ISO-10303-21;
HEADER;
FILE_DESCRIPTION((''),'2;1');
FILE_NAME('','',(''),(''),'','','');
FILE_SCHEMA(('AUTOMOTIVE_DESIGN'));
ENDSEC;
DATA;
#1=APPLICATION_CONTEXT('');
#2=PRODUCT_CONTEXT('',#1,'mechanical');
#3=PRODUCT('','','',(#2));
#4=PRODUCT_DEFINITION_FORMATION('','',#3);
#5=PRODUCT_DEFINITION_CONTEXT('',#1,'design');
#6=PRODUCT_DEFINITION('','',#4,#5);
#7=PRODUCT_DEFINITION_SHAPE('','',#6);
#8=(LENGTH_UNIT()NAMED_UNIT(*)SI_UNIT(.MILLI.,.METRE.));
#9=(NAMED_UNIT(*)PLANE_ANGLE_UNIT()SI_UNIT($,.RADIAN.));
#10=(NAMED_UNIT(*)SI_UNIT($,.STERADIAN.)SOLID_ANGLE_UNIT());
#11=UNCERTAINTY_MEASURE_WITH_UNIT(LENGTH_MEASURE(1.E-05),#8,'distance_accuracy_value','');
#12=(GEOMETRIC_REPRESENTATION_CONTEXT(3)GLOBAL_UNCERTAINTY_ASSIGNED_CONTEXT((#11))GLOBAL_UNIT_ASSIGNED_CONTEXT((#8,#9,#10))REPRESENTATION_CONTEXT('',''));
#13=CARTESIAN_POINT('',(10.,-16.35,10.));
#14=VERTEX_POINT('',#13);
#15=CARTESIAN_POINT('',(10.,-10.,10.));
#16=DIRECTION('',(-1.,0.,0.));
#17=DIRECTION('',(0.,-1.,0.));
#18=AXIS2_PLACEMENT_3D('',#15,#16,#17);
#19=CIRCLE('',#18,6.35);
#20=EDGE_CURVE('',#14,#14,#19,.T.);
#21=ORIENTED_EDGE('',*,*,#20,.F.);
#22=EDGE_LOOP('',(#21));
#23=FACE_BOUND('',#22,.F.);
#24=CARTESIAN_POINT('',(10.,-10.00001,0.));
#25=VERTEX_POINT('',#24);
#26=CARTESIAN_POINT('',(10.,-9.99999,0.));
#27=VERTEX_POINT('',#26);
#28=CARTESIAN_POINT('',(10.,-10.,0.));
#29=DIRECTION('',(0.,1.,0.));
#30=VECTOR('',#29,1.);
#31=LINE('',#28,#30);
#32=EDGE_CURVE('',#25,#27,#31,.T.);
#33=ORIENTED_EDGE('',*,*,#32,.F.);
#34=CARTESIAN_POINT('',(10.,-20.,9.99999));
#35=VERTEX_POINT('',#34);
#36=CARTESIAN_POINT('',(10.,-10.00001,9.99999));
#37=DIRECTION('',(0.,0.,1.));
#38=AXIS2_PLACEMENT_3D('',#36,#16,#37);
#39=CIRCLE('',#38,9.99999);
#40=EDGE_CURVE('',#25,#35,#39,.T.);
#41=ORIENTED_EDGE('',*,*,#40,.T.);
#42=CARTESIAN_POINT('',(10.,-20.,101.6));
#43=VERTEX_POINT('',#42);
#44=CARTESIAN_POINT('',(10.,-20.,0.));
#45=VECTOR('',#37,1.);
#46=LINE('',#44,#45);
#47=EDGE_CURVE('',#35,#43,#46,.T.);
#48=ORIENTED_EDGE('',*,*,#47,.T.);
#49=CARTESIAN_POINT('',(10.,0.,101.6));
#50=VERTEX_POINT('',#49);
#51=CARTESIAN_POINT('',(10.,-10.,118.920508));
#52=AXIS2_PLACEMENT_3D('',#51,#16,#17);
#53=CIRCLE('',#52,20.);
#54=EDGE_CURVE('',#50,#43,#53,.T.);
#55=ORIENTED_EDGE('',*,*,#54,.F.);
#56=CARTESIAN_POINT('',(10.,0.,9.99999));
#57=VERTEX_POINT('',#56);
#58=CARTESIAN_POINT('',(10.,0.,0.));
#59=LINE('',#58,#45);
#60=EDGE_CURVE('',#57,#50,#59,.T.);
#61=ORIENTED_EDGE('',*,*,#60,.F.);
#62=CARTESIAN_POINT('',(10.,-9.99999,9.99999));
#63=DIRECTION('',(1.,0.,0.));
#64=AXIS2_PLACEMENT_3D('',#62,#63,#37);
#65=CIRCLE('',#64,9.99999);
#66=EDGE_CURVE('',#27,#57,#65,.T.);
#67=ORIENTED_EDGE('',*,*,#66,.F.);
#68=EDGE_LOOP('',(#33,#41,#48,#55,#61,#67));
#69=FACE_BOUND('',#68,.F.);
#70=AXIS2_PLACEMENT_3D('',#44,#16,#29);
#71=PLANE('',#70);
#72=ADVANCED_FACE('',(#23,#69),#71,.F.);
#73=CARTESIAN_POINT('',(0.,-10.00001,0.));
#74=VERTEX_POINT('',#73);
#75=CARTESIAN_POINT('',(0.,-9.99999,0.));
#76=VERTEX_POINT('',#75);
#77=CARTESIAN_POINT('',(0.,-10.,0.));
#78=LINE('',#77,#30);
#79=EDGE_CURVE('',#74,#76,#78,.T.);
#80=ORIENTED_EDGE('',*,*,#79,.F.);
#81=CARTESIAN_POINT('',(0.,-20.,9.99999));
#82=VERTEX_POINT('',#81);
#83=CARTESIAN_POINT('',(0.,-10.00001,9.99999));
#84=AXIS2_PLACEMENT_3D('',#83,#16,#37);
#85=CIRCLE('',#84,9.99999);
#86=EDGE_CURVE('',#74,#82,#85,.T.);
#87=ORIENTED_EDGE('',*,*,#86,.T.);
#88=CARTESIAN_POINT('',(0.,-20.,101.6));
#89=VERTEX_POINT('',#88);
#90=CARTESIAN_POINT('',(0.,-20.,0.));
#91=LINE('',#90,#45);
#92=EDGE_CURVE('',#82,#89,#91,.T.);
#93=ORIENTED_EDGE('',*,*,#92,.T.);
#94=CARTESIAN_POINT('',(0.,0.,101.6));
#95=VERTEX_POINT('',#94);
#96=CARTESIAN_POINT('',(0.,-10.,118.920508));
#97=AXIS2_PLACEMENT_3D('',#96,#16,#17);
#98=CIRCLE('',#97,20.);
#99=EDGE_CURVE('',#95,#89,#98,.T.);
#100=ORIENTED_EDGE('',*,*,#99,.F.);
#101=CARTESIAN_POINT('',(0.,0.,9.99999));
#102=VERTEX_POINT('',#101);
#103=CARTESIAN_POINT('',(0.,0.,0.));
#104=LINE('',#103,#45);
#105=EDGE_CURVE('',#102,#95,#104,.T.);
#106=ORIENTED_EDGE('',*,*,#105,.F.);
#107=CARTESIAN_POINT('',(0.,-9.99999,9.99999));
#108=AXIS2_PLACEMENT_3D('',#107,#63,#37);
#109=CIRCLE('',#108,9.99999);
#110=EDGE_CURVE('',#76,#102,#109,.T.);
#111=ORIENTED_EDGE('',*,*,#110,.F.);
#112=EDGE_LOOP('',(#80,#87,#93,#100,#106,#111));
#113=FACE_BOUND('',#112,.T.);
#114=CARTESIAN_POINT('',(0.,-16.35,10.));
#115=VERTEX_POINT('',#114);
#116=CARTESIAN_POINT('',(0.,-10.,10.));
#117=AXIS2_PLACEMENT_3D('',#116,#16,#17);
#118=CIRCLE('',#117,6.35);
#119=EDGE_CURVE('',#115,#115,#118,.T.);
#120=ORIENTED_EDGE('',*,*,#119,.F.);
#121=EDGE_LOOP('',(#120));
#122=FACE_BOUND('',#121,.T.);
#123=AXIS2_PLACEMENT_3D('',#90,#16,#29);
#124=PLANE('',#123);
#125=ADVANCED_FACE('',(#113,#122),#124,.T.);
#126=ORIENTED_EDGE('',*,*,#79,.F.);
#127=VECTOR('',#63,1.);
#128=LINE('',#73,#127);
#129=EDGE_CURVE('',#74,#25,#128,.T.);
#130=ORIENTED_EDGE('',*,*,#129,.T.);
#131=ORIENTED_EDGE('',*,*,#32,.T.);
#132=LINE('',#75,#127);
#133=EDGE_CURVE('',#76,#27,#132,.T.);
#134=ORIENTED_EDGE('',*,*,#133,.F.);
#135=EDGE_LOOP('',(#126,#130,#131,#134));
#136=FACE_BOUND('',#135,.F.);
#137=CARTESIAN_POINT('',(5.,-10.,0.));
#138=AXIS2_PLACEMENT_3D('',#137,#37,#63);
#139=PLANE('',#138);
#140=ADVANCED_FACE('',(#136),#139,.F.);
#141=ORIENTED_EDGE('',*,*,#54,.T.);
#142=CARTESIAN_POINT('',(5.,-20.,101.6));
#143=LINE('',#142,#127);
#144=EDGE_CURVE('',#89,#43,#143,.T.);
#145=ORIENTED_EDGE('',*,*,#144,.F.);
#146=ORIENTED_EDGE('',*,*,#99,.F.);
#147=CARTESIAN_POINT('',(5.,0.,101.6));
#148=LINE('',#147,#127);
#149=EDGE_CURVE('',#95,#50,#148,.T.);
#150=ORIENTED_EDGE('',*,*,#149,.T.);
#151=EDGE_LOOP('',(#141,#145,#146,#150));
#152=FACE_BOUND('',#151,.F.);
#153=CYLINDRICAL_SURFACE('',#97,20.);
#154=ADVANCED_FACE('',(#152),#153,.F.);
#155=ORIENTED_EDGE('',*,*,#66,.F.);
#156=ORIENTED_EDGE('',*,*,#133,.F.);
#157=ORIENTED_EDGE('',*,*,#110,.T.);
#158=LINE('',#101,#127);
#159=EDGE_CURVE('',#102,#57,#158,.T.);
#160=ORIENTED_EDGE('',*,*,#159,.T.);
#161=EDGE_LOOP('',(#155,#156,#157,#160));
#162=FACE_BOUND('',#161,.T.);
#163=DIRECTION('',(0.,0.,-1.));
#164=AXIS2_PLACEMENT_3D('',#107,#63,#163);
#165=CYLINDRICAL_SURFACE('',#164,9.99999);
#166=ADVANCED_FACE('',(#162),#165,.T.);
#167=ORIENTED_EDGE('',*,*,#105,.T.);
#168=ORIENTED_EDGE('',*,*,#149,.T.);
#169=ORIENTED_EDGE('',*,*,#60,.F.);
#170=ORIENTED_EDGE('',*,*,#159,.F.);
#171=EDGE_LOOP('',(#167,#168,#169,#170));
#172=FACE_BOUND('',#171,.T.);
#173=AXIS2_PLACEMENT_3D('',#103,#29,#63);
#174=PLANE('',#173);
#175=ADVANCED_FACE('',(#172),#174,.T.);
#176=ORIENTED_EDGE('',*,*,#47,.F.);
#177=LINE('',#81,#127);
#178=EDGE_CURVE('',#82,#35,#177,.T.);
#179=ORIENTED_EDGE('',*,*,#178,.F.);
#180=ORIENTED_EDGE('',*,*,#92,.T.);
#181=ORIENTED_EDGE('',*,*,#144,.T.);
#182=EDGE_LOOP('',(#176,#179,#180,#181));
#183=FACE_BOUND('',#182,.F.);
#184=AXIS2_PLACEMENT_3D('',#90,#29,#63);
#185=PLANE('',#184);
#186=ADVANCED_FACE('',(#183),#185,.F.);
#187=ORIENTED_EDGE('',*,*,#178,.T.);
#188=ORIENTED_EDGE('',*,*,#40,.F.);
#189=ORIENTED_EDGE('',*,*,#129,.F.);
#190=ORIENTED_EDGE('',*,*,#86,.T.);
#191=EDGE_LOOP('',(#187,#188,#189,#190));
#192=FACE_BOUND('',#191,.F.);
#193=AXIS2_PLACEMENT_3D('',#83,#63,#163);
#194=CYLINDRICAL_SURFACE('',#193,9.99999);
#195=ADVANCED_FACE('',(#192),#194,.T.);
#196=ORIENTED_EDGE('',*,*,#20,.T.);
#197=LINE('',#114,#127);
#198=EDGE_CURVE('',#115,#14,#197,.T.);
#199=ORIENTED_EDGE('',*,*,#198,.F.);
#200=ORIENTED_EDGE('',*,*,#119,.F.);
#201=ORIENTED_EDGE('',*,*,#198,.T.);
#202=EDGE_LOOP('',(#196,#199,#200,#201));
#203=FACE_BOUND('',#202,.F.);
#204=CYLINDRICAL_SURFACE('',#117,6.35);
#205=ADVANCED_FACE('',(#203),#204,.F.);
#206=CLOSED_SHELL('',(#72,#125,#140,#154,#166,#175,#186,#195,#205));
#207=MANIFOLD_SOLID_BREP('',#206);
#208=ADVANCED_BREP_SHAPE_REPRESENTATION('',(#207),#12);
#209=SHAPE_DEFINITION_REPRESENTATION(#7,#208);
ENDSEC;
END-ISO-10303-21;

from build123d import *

# Parameters (mm, degrees)
F0_W     = 10
F0_H     = 20
F1_DEPTH = 101.6
F2_R     = 6.35
F2_R_2   = 20
F3_DEPTH = 25.4
F4_R     = 9.99999


# Not quite as in the source:
# - a fillet or chamfer is up to 0.001 mm smaller than in the source, because OpenCascade refuses the exact size


with BuildPart() as f1:
    # F0 (on Top) → F1 (new body)
    with BuildSketch(Plane.XY):
        with Locations((5, -10)):
            Rectangle(F0_W, F0_H)
    extrude(amount=F1_DEPTH)

    # F2 (on face) → F3 (cut)
    with BuildSketch(Plane(origin=(0, 0, 0), x_dir=(0, -1, 0), z_dir=(-1, 0, 0))):
        with Locations((10, 10)):
            Circle(F2_R)
        with Locations((10, 118.9205080757)):
            Circle(F2_R_2)
    extrude(amount=-F3_DEPTH, mode=Mode.SUBTRACT)

    # F4 (radius 10 in the source; OpenCascade refuses exactly that, so slightly less here)
    f4_edges = [f1.edges().sort_by_distance(p)[0] for p in [
        (5, -20, 0),
        (5, 0, 0),
    ]]
    fillet(f4_edges, radius=F4_R)


solid = f1.part
